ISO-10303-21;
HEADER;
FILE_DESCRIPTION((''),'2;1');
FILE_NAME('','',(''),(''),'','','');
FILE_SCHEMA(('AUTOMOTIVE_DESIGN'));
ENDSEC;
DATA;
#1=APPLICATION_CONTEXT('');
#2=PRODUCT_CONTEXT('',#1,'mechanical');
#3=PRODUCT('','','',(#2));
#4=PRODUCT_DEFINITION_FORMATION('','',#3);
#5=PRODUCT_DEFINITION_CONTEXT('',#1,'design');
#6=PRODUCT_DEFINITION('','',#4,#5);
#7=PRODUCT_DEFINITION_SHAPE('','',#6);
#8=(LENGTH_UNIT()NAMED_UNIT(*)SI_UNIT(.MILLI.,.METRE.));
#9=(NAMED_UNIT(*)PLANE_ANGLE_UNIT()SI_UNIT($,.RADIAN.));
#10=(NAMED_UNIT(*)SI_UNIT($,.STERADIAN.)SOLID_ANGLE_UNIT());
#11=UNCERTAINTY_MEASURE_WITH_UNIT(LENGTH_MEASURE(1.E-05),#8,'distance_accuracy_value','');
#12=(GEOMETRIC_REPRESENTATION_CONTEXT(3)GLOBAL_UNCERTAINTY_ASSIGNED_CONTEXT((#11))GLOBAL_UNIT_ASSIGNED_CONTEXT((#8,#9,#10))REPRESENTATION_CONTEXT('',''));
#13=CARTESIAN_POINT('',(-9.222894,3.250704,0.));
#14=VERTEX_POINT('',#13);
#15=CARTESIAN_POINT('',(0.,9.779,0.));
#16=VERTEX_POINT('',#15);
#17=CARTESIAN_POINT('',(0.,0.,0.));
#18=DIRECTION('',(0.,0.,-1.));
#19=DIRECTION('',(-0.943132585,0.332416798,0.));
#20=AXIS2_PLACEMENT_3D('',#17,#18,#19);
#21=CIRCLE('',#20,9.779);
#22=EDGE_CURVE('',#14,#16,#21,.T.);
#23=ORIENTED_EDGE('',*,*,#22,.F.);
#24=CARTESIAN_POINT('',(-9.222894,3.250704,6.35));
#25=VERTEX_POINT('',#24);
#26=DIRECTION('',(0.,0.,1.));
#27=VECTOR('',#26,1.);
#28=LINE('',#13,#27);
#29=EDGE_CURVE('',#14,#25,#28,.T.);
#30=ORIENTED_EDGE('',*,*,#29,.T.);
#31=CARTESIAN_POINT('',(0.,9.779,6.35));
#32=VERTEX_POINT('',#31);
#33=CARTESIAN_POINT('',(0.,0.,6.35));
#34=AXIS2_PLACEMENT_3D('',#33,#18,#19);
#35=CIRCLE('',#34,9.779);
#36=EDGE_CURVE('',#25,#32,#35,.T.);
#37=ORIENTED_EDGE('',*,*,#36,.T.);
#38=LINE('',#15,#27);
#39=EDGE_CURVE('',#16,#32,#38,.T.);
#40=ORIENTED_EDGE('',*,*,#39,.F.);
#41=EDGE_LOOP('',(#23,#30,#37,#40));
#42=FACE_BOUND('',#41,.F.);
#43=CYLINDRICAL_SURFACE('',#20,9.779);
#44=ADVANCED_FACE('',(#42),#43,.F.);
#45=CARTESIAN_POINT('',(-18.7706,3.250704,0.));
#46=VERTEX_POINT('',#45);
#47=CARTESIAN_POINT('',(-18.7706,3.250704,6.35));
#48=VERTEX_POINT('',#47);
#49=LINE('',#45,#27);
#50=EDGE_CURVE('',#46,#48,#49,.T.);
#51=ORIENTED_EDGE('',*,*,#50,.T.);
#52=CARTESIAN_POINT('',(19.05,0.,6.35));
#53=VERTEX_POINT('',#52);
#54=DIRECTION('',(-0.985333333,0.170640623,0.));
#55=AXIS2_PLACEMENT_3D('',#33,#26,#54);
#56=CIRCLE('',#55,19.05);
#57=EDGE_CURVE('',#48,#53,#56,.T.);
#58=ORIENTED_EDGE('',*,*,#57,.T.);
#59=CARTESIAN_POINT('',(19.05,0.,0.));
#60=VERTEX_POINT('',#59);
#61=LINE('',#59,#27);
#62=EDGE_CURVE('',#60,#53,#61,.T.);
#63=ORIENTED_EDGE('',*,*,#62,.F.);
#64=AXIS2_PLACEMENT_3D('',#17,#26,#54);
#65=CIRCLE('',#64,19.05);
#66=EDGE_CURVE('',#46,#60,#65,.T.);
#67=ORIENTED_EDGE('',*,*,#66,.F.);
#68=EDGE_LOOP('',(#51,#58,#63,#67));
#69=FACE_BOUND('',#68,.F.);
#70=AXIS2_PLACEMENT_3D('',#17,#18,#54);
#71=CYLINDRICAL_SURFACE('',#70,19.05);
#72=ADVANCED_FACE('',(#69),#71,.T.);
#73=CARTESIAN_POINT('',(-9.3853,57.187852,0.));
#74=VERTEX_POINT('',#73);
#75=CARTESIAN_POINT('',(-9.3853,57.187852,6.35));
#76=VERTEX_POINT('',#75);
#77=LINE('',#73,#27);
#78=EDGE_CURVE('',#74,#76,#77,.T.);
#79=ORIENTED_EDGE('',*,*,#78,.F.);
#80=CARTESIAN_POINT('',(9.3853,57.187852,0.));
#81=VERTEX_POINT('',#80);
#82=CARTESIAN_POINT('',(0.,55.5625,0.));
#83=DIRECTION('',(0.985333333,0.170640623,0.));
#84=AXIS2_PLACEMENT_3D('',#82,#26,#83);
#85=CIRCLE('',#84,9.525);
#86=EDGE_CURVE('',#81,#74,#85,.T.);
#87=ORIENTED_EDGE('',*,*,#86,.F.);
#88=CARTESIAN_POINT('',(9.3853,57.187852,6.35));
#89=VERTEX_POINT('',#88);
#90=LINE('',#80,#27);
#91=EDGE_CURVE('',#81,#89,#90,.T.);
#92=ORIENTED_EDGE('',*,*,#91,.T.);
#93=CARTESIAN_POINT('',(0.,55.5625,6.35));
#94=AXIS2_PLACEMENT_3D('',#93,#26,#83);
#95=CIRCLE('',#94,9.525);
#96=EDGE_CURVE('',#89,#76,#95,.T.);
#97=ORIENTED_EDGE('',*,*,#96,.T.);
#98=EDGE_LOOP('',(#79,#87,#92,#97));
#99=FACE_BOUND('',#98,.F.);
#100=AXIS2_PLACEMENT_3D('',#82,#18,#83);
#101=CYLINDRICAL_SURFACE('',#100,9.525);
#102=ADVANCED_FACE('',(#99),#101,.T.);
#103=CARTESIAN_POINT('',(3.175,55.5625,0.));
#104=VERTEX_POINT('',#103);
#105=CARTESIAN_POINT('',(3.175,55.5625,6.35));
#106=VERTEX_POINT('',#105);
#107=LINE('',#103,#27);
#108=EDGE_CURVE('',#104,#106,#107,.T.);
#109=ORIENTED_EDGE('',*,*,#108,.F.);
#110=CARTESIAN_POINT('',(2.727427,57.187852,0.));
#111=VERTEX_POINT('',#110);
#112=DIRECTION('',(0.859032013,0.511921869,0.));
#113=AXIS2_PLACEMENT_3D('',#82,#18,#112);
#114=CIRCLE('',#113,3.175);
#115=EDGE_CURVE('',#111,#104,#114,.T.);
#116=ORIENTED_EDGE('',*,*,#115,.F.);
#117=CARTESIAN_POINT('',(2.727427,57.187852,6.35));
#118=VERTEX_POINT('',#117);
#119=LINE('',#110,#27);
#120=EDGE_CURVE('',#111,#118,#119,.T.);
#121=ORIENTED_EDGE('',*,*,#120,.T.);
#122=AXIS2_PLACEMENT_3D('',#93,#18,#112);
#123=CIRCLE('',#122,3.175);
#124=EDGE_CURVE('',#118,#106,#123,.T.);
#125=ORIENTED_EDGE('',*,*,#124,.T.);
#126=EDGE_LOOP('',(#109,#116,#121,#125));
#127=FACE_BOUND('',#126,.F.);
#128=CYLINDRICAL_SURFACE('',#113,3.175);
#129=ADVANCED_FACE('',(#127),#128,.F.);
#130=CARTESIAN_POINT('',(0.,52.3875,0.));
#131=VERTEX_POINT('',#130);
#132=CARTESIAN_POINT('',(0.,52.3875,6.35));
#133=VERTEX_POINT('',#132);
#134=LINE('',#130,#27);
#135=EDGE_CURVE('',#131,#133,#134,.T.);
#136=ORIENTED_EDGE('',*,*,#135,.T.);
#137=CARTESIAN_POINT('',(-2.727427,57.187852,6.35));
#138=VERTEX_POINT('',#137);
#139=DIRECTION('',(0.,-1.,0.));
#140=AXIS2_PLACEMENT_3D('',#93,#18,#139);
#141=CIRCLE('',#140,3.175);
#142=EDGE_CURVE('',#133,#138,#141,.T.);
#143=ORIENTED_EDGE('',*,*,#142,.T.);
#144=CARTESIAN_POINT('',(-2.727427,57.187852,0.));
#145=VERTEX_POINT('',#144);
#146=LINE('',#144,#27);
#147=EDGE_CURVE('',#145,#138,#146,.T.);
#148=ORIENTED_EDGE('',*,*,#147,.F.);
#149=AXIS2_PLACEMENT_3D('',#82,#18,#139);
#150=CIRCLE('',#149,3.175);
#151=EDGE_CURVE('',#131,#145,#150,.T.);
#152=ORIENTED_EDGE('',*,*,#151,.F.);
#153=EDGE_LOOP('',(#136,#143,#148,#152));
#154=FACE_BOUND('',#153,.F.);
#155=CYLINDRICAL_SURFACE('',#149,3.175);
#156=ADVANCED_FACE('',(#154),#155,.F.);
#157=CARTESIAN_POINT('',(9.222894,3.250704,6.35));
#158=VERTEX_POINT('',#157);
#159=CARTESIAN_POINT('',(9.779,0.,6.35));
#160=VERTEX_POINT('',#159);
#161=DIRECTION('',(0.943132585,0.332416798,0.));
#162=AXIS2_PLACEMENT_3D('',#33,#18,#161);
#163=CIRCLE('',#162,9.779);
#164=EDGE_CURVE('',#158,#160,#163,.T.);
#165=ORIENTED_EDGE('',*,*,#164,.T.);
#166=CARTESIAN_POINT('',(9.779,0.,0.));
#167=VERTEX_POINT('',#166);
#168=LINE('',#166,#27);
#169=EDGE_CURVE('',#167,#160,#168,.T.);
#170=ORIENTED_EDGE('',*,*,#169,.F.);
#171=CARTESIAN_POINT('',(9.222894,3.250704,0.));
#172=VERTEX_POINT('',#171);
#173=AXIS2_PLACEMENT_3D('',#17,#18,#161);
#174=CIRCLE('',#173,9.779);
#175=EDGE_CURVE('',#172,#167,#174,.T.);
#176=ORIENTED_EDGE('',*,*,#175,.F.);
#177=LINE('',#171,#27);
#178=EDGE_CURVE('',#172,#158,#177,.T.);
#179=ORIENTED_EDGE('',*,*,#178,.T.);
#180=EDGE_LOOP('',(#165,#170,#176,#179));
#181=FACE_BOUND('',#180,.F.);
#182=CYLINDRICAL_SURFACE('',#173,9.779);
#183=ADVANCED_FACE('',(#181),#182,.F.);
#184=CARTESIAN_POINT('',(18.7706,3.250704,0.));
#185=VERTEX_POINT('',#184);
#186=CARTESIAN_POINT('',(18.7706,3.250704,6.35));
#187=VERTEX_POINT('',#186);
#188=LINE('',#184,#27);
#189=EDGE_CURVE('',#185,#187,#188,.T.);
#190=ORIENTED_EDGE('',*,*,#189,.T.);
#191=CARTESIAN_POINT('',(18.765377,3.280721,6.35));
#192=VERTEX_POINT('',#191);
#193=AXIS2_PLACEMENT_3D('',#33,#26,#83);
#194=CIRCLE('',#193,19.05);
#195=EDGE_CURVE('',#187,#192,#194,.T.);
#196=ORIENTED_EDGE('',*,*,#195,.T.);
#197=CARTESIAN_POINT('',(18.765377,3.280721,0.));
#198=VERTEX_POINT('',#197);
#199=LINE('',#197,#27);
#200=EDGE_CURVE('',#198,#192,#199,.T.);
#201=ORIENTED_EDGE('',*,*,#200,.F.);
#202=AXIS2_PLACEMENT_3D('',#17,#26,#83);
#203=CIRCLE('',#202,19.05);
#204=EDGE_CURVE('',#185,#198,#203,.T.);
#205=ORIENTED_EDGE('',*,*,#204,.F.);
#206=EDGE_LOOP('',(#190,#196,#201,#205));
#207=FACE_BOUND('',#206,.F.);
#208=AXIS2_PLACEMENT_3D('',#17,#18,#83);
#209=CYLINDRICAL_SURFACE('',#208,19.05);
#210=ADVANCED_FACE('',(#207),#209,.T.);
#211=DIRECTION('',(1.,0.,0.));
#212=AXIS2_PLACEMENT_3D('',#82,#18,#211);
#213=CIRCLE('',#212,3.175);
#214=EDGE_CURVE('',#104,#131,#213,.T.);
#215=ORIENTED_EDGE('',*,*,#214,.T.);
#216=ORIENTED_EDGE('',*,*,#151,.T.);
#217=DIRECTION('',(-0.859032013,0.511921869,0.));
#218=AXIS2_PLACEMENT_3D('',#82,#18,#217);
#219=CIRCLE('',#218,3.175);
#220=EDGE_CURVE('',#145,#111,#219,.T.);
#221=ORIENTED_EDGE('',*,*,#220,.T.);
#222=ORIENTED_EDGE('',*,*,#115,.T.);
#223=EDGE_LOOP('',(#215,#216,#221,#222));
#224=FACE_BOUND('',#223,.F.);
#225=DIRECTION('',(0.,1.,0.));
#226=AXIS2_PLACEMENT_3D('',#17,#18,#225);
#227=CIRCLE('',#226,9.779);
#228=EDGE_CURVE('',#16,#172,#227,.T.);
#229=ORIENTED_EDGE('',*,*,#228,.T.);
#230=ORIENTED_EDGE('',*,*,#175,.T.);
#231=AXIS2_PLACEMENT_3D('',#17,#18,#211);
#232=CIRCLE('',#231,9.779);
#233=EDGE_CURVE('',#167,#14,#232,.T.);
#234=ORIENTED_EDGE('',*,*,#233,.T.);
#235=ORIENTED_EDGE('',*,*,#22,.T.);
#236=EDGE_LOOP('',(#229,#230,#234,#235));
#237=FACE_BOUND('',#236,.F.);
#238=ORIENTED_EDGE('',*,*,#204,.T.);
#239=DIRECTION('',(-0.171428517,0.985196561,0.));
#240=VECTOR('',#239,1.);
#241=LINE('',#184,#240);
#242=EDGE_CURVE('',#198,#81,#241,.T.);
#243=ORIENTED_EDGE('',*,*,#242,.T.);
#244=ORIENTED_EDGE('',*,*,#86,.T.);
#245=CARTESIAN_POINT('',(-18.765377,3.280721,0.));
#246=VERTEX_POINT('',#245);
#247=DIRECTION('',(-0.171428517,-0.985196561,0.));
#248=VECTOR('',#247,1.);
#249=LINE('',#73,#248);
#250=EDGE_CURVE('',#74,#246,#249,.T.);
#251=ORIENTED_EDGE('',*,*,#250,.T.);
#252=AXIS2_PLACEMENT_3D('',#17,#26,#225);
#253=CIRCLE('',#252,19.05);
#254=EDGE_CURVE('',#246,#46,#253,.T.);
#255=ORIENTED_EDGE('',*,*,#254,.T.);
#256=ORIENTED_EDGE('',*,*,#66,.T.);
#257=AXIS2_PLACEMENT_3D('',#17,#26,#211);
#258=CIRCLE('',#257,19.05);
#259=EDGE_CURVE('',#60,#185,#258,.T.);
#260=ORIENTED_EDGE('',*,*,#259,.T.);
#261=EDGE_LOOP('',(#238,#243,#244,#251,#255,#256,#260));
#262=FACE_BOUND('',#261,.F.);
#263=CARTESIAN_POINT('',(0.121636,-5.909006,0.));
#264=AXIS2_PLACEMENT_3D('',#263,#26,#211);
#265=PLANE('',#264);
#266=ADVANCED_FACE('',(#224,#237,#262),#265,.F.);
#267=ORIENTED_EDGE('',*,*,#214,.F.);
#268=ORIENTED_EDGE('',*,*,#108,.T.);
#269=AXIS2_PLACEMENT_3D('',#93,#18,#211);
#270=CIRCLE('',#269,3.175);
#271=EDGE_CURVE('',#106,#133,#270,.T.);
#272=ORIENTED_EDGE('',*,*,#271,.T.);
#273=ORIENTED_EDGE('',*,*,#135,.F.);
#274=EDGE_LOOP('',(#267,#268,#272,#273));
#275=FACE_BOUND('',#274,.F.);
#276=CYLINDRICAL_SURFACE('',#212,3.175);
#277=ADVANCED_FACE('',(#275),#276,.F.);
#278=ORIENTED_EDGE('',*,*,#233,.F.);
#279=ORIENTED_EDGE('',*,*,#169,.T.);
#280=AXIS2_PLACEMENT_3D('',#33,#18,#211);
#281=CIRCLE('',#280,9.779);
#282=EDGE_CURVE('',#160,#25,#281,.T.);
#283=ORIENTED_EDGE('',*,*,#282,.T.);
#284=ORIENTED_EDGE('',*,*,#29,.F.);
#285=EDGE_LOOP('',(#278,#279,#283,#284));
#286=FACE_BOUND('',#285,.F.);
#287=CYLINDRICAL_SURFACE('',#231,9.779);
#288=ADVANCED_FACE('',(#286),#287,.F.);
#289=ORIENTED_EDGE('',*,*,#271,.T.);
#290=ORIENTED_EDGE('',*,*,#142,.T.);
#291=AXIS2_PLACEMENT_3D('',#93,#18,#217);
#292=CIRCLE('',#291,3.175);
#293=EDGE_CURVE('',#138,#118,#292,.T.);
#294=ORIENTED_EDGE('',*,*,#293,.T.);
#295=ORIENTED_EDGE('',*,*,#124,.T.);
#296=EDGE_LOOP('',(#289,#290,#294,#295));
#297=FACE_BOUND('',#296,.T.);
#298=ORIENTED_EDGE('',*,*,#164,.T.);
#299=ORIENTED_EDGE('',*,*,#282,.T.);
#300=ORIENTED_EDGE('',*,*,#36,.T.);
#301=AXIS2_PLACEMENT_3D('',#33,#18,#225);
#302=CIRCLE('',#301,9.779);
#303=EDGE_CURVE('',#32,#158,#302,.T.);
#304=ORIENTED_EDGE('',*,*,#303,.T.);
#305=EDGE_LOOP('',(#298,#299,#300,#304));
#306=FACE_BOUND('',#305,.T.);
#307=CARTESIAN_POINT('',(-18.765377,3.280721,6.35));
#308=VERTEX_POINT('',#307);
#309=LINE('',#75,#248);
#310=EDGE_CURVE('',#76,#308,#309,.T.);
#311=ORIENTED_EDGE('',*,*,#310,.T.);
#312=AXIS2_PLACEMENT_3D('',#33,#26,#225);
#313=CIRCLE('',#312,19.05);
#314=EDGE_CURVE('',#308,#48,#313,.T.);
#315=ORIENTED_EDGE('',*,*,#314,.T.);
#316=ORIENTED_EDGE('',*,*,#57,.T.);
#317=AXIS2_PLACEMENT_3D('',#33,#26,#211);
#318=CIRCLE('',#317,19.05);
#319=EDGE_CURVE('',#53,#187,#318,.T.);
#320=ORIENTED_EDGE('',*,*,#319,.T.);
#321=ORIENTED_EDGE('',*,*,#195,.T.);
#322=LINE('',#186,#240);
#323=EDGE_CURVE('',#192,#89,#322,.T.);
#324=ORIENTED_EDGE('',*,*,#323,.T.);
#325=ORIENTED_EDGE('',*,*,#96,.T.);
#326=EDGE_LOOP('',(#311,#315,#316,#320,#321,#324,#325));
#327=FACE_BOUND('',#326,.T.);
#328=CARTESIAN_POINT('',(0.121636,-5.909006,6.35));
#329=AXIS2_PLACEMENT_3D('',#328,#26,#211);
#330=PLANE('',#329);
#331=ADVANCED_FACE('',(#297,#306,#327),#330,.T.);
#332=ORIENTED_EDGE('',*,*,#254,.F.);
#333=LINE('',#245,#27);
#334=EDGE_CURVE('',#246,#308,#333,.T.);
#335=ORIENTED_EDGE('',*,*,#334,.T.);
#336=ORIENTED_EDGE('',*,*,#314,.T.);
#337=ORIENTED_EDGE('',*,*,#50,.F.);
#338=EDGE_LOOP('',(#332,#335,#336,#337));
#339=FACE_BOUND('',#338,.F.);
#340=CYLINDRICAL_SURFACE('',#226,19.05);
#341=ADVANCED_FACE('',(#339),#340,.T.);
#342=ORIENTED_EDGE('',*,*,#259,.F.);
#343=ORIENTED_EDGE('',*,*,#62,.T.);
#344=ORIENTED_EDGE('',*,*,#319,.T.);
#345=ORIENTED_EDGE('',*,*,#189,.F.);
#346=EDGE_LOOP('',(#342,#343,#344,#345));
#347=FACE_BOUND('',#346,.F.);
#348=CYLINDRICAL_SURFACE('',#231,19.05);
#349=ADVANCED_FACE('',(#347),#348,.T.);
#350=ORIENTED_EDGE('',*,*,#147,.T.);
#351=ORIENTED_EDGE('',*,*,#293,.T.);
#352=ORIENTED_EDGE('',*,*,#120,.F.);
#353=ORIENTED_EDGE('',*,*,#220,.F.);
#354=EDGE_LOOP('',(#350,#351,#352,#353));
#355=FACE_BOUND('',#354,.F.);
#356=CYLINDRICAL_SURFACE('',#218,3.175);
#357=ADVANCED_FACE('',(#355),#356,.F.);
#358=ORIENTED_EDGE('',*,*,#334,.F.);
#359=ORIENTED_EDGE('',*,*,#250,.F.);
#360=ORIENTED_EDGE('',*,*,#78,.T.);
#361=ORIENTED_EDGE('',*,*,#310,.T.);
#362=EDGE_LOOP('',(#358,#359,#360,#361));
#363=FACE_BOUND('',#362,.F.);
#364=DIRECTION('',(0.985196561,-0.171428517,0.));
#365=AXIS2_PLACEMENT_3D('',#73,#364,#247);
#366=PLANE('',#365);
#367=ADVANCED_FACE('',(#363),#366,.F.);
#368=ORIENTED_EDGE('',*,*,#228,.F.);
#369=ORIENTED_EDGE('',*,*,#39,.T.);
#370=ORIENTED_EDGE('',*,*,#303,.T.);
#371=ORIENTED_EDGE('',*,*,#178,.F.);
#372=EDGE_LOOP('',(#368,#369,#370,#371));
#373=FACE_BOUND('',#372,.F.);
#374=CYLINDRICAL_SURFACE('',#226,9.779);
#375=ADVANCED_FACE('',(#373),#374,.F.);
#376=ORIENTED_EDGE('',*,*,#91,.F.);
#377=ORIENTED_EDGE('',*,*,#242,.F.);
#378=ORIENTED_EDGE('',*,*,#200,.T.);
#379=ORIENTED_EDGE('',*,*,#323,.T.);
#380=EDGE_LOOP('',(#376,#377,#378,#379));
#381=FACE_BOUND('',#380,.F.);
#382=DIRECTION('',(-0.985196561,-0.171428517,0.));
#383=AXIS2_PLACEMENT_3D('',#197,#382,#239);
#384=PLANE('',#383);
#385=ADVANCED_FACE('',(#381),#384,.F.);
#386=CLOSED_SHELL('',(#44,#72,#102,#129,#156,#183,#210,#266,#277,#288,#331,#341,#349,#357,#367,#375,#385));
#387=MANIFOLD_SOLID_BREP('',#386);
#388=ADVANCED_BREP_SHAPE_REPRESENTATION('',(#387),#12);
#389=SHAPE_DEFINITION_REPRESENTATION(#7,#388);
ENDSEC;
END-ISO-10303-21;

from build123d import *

# Parameters (mm, degrees)
F1_DEPTH = 6.35


with BuildPart() as f1:
    # F0 (on Top) → F1 (new body)
    with BuildSketch(Plane.XY):
        with BuildLine():
            ThreePointArc((-18.7706, 3.2507038684), (-1.6313445375, -18.98002147), (19.05, 0))
            ThreePointArc((19.05, 0), (18.98002147, 1.6313445375), (18.7706, 3.2507038684))
            Line((18.7706, 3.2507038684), (9.222893546, 3.2507038684))
            ThreePointArc((9.222893546, 3.2507038684), (9.6389708213, 1.6489640709), (9.779, 0))
            ThreePointArc((9.779, 0), (-1.6489640709, -9.6389708213), (-9.222893546, 3.2507038684))
            Line((-9.222893546, 3.2507038684), (-18.7706, 3.2507038684))
        make_face()
        with BuildLine():
            Line((-9.3853, 57.1878519342), (-18.7706, 3.2507038684))
            ThreePointArc((-18.7706, 3.2507038684), (-12.2673671036, 14.5744366734), (0, 19.05))
            Line((0, 19.05), (0, 46.0375))
            ThreePointArc((0, 46.0375), (-7.2872183367, 49.4288164482), (-9.3853, 57.1878519342))
        make_face()
        with BuildLine():
            Line((9.222893546, 3.2507038684), (18.7706, 3.2507038684))
            ThreePointArc((18.7706, 3.2507038684), (12.2673671036, 14.5744366734), (0, 19.05))
            Line((0, 19.05), (0, 9.779))
            ThreePointArc((0, 9.779), (5.6497879549, 7.9817753078), (9.222893546, 3.2507038684))
        make_face()
        with BuildLine():
            ThreePointArc((0, 19.05), (12.2673671036, 14.5744366734), (18.7706, 3.2507038684))
            Line((18.7706, 3.2507038684), (9.3853, 57.1878519342))
            ThreePointArc((9.3853, 57.1878519342), (9.490010735, 56.3781722687), (9.525, 55.5625))
            ThreePointArc((9.525, 55.5625), (6.7351920908, 48.8273079092), (0, 46.0375))
            Line((0, 46.0375), (0, 19.05))
        make_face()
        with BuildLine():
            ThreePointArc((0, 19.05), (-12.2673671036, 14.5744366734), (-18.7706, 3.2507038684))
            Line((-18.7706, 3.2507038684), (-9.222893546, 3.2507038684))
            ThreePointArc((-9.222893546, 3.2507038684), (-5.6497879549, 7.9817753078), (0, 9.779))
            Line((0, 9.779), (0, 19.05))
        make_face()
        with BuildLine():
            Line((2.7274266425, 57.1878519342), (9.3853, 57.1878519342))
            ThreePointArc((9.3853, 57.1878519342), (0, 65.0875), (-9.3853, 57.1878519342))
            Line((-9.3853, 57.1878519342), (-2.7274266425, 57.1878519342))
            ThreePointArc((-2.7274266425, 57.1878519342), (0, 58.7375), (2.7274266425, 57.1878519342))
        make_face()
        with BuildLine():
            ThreePointArc((9.525, 55.5625), (9.490010735, 56.3781722687), (9.3853, 57.1878519342))
            Line((9.3853, 57.1878519342), (2.7274266425, 57.1878519342))
            ThreePointArc((2.7274266425, 57.1878519342), (3.0610622821, 56.4054250887), (3.175, 55.5625))
            ThreePointArc((3.175, 55.5625), (2.2450640303, 53.3174359697), (0, 52.3875))
            Line((0, 52.3875), (0, 46.0375))
            ThreePointArc((0, 46.0375), (6.7351920908, 48.8273079092), (9.525, 55.5625))
        make_face()
        with BuildLine():
            Line((-2.7274266425, 57.1878519342), (-9.3853, 57.1878519342))
            ThreePointArc((-9.3853, 57.1878519342), (-7.2872183367, 49.4288164482), (0, 46.0375))
            Line((0, 46.0375), (0, 52.3875))
            ThreePointArc((0, 52.3875), (-2.7605359435, 53.9940401489), (-2.7274266425, 57.1878519342))
        make_face()
    extrude(amount=F1_DEPTH)


solid = f1.part
